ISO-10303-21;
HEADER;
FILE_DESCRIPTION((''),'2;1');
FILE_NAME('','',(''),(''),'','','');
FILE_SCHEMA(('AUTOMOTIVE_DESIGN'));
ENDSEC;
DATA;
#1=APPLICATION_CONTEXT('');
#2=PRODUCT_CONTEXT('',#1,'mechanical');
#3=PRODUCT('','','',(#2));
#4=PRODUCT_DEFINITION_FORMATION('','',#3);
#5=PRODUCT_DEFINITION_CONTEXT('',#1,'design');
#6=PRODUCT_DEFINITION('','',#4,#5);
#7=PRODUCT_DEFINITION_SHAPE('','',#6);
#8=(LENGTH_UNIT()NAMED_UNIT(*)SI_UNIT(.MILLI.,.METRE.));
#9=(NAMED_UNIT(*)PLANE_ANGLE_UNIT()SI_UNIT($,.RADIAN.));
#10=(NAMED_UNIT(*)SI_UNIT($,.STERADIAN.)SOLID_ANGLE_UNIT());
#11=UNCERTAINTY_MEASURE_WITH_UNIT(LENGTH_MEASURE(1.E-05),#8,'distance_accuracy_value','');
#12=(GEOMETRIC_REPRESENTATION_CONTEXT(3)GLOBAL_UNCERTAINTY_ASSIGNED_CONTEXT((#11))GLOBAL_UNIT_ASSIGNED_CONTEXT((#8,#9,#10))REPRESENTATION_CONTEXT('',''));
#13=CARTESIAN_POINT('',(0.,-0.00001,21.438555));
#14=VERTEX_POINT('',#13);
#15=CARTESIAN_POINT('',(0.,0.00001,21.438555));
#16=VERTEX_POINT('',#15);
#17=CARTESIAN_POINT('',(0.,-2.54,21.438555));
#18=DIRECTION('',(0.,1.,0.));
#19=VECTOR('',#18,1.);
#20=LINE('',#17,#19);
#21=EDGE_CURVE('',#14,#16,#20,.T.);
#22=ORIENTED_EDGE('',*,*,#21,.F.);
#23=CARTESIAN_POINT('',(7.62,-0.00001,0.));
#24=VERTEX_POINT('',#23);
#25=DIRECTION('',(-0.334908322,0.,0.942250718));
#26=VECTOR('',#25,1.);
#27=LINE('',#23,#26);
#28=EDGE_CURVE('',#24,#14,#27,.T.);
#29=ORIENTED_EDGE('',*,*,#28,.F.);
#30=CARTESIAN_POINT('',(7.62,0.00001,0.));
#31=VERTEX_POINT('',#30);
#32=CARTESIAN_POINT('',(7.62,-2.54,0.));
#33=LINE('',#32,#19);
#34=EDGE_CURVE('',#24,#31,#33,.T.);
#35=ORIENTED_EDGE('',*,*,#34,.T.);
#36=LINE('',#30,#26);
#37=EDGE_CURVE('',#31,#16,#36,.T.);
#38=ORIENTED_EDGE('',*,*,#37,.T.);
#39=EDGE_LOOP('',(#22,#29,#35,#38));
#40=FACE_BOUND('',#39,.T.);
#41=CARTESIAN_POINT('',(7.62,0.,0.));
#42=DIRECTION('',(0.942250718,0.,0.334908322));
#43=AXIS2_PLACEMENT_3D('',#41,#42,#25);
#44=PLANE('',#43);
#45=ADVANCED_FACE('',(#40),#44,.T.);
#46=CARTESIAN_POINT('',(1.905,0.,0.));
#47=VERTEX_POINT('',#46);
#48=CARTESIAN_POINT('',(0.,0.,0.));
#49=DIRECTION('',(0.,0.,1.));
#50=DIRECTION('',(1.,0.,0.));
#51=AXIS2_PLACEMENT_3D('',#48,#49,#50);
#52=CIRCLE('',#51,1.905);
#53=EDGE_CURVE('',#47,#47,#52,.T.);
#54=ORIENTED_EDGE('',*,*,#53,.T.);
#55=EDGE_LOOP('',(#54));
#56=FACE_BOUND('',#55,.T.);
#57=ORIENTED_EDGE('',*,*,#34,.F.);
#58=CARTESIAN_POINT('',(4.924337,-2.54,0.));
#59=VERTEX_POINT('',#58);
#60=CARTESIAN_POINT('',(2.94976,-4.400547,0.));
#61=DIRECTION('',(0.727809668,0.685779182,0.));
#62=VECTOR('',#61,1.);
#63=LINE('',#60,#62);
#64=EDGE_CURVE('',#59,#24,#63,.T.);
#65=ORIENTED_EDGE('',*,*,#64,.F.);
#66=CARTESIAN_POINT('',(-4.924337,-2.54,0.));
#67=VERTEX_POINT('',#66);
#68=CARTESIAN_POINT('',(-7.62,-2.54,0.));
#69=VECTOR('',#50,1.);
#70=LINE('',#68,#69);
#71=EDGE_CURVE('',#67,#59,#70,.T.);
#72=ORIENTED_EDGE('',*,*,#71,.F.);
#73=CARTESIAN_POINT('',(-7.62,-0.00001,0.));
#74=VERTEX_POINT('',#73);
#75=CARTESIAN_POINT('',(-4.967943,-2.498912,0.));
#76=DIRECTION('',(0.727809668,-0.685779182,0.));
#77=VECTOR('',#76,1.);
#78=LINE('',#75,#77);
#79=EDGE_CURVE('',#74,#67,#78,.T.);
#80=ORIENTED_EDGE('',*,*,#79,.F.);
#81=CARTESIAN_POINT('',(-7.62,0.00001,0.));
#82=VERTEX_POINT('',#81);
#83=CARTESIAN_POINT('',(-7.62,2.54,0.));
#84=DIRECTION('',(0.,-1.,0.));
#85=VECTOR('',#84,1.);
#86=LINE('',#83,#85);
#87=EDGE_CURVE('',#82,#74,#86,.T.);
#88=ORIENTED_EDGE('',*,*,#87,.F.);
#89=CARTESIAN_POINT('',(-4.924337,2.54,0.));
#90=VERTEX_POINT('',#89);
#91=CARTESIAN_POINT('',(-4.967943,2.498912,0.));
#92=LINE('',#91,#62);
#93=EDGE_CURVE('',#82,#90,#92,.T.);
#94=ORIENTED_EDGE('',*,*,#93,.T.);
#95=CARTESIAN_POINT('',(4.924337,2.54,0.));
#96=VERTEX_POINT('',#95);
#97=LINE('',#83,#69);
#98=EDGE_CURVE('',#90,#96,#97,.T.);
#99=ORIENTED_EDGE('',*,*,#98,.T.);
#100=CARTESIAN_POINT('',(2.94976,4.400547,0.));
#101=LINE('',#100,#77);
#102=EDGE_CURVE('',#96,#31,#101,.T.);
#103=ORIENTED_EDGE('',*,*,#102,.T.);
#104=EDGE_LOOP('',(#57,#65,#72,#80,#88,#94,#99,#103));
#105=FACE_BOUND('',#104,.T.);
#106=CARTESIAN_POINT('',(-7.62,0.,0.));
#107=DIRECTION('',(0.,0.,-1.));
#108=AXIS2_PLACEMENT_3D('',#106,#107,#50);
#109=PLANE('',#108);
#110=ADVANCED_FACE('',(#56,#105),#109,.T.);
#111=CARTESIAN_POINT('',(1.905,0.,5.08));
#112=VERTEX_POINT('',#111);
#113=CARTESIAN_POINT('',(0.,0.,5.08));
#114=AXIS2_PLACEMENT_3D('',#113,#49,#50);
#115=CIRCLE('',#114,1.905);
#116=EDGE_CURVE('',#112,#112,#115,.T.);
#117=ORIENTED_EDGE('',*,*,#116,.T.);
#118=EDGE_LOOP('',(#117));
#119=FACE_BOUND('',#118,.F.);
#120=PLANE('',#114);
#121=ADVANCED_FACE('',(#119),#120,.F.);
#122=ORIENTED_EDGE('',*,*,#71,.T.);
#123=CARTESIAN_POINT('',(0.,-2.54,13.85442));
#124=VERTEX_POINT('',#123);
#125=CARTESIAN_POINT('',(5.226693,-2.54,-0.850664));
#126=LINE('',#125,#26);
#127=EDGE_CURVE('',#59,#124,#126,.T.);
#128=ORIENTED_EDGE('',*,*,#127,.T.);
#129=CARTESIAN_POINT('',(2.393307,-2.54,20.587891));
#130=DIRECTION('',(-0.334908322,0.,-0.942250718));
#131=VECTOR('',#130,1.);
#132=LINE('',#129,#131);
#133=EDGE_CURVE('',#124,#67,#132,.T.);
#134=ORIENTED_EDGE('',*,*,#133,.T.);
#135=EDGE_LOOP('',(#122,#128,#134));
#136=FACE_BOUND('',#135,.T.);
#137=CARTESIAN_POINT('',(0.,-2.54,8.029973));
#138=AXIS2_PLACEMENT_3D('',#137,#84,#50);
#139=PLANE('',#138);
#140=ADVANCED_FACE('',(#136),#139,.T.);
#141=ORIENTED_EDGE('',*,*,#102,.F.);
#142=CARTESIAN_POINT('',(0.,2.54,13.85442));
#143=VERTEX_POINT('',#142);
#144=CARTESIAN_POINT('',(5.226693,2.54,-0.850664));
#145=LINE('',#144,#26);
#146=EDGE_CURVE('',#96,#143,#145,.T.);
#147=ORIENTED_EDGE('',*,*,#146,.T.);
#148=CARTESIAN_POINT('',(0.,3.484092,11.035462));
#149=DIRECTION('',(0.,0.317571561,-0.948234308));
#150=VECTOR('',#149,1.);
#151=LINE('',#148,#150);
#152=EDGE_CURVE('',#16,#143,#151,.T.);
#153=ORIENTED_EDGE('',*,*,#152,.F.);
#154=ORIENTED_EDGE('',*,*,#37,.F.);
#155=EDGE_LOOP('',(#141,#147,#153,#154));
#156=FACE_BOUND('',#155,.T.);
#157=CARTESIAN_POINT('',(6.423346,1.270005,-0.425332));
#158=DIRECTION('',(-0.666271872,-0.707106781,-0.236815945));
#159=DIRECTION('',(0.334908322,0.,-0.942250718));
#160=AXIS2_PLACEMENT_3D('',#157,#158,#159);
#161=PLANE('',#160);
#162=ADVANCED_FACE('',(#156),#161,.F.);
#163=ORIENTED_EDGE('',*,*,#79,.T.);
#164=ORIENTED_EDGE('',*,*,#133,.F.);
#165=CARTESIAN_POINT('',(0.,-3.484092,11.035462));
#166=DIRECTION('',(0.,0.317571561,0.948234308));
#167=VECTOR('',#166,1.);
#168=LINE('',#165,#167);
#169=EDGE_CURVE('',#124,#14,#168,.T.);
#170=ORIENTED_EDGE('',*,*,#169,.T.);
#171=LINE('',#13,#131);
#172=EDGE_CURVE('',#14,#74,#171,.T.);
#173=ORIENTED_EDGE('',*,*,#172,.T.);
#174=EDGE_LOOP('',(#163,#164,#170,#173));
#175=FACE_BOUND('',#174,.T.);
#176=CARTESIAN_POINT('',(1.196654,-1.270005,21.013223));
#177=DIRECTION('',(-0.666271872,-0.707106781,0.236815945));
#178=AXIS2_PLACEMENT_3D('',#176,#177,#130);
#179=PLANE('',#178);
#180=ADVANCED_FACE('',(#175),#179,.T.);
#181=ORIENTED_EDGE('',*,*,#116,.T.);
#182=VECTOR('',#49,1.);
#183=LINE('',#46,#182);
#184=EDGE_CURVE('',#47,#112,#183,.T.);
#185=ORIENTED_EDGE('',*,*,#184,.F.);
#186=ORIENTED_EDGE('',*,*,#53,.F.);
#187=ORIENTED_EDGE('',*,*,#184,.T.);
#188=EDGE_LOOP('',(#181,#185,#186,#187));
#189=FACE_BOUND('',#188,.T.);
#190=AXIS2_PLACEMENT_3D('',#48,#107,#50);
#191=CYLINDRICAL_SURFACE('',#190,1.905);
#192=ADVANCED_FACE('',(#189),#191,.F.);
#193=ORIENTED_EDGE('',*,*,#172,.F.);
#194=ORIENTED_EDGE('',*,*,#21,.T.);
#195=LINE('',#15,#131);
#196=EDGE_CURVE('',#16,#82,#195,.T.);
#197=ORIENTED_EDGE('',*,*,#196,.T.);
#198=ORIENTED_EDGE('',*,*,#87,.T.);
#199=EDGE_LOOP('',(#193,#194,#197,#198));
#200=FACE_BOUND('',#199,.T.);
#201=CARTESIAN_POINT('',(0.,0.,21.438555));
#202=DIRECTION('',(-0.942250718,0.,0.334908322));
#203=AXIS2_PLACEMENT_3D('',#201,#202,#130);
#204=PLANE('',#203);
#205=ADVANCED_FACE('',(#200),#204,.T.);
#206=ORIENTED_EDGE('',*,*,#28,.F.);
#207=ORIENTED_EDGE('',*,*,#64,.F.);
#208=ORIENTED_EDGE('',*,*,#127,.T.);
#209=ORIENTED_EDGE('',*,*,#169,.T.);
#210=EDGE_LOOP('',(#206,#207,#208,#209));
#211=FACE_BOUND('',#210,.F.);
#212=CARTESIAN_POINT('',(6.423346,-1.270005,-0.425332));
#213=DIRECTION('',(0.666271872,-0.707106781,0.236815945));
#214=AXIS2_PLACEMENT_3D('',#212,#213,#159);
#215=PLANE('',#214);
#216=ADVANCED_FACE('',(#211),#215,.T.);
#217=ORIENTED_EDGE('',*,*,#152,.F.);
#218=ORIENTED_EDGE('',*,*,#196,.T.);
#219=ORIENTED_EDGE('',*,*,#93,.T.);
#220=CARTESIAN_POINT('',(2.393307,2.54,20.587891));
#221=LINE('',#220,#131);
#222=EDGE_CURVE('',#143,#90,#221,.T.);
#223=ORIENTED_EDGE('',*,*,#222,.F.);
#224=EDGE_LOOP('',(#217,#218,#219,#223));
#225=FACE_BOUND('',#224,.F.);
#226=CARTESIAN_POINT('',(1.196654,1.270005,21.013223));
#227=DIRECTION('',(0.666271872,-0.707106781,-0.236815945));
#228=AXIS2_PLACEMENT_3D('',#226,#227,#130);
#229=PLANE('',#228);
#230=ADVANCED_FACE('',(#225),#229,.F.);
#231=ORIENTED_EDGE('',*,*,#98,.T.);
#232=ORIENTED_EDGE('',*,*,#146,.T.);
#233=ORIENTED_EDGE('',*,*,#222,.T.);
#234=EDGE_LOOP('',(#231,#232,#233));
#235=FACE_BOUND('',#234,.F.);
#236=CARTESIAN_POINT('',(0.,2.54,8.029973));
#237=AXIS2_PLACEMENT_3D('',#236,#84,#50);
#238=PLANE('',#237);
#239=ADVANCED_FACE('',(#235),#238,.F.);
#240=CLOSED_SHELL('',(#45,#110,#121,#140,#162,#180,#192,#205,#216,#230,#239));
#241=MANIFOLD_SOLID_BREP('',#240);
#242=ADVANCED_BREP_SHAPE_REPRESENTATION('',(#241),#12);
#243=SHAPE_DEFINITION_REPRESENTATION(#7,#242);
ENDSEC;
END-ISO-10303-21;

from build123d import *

# Parameters (mm, degrees)
F1_DEPTH      = 2.54
F1_DEPTH_BACK = 2.54
F2_R          = 1.905
F3_DEPTH      = 5.08
F4_SIZE       = 2.53999


# Not quite as in the source:
# - a fillet or chamfer is up to 0.001 mm smaller than in the source, because OpenCascade refuses the exact size


with BuildPart() as f1:
    # F0 (on Front) → F1 (new body, two sides)
    with BuildSketch(Plane.XZ) as f1_sk:
        Polygon((0, 21.4385549893), (-7.62, 0), (7.62, 0), align=None)
    extrude(amount=F1_DEPTH)
    extrude(f1_sk.sketch, amount=-F1_DEPTH_BACK)

    # F2 (on Top) → F3 (cut)
    with BuildSketch(Plane.XY):
        Circle(F2_R)
    extrude(amount=F3_DEPTH, mode=Mode.SUBTRACT)

    # F4 (size 2.54 in the source; OpenCascade refuses exactly that, so slightly less here)
    f4_edges = [f1.edges().sort_by_distance(p)[0] for p in [
        (3.81, -2.54, 10.719277),
        (-3.81, -2.54, 10.719277),
        (-3.81, 2.54, 10.719277),
        (3.81, 2.54, 10.719277),
    ]]
    chamfer(f4_edges, length=F4_SIZE)


solid = f1.part
